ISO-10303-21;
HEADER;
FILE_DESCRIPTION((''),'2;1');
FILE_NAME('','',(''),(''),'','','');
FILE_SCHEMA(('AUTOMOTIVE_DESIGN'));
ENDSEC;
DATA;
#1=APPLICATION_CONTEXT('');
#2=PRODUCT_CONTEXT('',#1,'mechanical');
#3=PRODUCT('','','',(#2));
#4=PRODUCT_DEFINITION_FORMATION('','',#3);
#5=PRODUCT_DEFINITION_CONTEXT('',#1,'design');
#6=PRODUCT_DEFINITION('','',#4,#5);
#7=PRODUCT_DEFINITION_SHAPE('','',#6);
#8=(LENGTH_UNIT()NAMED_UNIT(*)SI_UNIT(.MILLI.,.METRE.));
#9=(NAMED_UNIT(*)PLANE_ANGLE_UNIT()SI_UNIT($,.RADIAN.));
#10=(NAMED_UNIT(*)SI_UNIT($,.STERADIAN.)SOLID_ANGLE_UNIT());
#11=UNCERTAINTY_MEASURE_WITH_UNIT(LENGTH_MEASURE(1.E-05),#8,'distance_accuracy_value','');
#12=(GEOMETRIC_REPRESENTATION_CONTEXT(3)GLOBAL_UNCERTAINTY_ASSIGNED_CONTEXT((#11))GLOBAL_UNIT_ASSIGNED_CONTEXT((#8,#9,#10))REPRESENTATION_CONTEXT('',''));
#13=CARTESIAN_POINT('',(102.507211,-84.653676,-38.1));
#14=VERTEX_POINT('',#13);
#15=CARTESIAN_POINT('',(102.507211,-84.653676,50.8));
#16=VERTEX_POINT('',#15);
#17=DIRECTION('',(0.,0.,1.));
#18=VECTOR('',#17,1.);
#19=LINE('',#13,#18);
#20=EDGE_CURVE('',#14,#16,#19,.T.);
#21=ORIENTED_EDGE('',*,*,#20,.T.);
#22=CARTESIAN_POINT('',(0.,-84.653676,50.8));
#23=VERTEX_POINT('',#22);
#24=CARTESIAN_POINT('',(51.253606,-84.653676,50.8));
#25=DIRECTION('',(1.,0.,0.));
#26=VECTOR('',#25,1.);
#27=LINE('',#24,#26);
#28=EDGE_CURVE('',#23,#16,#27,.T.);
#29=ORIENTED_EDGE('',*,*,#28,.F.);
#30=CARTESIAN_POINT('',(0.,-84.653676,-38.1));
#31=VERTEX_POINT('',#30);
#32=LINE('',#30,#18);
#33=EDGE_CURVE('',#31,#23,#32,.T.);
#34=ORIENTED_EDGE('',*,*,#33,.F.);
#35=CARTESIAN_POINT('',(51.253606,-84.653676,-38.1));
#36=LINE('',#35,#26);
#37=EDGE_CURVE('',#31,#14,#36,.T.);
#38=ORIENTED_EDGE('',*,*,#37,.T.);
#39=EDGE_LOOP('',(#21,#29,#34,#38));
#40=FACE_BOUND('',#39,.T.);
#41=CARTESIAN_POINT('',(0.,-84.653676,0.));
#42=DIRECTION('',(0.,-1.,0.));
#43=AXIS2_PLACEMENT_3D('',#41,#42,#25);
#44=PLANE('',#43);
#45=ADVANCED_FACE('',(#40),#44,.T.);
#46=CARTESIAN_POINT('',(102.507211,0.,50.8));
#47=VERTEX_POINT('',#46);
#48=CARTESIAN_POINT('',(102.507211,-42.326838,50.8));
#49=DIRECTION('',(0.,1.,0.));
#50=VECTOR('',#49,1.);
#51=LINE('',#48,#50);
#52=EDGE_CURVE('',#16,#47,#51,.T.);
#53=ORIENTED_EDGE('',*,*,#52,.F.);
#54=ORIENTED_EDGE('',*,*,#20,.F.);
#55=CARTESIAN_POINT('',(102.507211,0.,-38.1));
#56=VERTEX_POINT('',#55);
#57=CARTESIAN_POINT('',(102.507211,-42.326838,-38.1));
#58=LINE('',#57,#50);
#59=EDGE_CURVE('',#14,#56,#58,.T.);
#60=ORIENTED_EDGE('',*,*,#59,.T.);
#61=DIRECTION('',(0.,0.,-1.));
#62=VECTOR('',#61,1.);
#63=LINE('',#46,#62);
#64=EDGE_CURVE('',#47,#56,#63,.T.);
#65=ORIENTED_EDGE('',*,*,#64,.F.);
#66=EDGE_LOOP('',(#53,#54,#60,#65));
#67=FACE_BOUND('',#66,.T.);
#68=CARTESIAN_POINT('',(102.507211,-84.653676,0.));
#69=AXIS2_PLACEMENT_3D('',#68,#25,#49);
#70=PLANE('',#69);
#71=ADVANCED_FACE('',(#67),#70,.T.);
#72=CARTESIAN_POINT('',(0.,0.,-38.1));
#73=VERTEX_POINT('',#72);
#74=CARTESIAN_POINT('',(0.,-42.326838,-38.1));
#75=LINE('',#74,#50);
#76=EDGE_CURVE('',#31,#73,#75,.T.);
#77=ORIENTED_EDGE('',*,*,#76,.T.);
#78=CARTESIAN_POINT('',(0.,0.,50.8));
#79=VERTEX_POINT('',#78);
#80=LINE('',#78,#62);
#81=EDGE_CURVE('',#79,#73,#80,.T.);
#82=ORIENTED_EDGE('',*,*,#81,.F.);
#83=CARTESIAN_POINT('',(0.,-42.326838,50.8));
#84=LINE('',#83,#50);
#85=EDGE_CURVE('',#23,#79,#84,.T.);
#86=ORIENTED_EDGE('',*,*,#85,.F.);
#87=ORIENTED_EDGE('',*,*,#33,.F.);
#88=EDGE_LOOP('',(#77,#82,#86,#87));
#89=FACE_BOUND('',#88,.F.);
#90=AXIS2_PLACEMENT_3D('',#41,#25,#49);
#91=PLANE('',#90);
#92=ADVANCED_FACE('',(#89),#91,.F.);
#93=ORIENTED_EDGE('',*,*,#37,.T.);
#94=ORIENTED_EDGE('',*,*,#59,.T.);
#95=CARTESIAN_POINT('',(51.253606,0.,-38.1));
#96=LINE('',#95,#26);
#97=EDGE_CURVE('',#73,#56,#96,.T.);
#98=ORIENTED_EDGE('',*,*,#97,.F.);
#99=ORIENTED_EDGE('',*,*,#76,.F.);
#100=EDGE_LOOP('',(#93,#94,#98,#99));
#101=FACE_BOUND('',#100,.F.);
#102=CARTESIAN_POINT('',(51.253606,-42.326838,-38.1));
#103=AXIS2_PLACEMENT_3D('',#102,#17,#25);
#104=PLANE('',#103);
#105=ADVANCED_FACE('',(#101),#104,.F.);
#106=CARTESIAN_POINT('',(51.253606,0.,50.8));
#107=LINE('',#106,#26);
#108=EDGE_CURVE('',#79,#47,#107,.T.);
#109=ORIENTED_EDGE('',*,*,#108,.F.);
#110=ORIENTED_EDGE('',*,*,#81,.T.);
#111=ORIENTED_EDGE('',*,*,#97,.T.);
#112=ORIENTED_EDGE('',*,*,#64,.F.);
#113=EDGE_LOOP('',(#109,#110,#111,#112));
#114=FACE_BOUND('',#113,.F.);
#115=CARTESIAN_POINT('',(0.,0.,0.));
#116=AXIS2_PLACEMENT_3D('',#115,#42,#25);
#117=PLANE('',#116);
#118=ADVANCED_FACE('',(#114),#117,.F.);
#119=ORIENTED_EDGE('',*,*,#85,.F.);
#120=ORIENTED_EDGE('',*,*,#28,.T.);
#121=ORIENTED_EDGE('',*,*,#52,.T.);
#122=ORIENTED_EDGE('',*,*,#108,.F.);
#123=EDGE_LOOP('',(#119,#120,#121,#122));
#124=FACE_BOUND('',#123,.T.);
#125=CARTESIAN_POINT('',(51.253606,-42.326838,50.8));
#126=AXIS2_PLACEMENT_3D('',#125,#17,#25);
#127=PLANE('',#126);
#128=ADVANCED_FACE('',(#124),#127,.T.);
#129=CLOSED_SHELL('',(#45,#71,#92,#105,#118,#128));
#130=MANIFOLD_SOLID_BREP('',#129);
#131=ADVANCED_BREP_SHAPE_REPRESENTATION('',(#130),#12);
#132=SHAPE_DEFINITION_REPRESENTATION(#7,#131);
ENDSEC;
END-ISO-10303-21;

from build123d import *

# Parameters (mm, degrees)
F0_W          = 102.5072112679
F0_H          = 84.6536755562
F1_DEPTH      = 50.8
F1_DEPTH_BACK = 38.1


# Not quite as in the source:
# - the program builds the solid bodies; features that only make, move or delete a surface that nothing else refers to are left out


with BuildPart() as f1:
    # F0 (on Top) → F1 (new body, two sides)
    with BuildSketch(Plane.XY) as f1_sk:
        with Locations((51.253605634, -42.3268377781)):
            Rectangle(F0_W, F0_H)
    extrude(amount=F1_DEPTH)
    extrude(f1_sk.sketch, amount=-F1_DEPTH_BACK)


solid = f1.part
